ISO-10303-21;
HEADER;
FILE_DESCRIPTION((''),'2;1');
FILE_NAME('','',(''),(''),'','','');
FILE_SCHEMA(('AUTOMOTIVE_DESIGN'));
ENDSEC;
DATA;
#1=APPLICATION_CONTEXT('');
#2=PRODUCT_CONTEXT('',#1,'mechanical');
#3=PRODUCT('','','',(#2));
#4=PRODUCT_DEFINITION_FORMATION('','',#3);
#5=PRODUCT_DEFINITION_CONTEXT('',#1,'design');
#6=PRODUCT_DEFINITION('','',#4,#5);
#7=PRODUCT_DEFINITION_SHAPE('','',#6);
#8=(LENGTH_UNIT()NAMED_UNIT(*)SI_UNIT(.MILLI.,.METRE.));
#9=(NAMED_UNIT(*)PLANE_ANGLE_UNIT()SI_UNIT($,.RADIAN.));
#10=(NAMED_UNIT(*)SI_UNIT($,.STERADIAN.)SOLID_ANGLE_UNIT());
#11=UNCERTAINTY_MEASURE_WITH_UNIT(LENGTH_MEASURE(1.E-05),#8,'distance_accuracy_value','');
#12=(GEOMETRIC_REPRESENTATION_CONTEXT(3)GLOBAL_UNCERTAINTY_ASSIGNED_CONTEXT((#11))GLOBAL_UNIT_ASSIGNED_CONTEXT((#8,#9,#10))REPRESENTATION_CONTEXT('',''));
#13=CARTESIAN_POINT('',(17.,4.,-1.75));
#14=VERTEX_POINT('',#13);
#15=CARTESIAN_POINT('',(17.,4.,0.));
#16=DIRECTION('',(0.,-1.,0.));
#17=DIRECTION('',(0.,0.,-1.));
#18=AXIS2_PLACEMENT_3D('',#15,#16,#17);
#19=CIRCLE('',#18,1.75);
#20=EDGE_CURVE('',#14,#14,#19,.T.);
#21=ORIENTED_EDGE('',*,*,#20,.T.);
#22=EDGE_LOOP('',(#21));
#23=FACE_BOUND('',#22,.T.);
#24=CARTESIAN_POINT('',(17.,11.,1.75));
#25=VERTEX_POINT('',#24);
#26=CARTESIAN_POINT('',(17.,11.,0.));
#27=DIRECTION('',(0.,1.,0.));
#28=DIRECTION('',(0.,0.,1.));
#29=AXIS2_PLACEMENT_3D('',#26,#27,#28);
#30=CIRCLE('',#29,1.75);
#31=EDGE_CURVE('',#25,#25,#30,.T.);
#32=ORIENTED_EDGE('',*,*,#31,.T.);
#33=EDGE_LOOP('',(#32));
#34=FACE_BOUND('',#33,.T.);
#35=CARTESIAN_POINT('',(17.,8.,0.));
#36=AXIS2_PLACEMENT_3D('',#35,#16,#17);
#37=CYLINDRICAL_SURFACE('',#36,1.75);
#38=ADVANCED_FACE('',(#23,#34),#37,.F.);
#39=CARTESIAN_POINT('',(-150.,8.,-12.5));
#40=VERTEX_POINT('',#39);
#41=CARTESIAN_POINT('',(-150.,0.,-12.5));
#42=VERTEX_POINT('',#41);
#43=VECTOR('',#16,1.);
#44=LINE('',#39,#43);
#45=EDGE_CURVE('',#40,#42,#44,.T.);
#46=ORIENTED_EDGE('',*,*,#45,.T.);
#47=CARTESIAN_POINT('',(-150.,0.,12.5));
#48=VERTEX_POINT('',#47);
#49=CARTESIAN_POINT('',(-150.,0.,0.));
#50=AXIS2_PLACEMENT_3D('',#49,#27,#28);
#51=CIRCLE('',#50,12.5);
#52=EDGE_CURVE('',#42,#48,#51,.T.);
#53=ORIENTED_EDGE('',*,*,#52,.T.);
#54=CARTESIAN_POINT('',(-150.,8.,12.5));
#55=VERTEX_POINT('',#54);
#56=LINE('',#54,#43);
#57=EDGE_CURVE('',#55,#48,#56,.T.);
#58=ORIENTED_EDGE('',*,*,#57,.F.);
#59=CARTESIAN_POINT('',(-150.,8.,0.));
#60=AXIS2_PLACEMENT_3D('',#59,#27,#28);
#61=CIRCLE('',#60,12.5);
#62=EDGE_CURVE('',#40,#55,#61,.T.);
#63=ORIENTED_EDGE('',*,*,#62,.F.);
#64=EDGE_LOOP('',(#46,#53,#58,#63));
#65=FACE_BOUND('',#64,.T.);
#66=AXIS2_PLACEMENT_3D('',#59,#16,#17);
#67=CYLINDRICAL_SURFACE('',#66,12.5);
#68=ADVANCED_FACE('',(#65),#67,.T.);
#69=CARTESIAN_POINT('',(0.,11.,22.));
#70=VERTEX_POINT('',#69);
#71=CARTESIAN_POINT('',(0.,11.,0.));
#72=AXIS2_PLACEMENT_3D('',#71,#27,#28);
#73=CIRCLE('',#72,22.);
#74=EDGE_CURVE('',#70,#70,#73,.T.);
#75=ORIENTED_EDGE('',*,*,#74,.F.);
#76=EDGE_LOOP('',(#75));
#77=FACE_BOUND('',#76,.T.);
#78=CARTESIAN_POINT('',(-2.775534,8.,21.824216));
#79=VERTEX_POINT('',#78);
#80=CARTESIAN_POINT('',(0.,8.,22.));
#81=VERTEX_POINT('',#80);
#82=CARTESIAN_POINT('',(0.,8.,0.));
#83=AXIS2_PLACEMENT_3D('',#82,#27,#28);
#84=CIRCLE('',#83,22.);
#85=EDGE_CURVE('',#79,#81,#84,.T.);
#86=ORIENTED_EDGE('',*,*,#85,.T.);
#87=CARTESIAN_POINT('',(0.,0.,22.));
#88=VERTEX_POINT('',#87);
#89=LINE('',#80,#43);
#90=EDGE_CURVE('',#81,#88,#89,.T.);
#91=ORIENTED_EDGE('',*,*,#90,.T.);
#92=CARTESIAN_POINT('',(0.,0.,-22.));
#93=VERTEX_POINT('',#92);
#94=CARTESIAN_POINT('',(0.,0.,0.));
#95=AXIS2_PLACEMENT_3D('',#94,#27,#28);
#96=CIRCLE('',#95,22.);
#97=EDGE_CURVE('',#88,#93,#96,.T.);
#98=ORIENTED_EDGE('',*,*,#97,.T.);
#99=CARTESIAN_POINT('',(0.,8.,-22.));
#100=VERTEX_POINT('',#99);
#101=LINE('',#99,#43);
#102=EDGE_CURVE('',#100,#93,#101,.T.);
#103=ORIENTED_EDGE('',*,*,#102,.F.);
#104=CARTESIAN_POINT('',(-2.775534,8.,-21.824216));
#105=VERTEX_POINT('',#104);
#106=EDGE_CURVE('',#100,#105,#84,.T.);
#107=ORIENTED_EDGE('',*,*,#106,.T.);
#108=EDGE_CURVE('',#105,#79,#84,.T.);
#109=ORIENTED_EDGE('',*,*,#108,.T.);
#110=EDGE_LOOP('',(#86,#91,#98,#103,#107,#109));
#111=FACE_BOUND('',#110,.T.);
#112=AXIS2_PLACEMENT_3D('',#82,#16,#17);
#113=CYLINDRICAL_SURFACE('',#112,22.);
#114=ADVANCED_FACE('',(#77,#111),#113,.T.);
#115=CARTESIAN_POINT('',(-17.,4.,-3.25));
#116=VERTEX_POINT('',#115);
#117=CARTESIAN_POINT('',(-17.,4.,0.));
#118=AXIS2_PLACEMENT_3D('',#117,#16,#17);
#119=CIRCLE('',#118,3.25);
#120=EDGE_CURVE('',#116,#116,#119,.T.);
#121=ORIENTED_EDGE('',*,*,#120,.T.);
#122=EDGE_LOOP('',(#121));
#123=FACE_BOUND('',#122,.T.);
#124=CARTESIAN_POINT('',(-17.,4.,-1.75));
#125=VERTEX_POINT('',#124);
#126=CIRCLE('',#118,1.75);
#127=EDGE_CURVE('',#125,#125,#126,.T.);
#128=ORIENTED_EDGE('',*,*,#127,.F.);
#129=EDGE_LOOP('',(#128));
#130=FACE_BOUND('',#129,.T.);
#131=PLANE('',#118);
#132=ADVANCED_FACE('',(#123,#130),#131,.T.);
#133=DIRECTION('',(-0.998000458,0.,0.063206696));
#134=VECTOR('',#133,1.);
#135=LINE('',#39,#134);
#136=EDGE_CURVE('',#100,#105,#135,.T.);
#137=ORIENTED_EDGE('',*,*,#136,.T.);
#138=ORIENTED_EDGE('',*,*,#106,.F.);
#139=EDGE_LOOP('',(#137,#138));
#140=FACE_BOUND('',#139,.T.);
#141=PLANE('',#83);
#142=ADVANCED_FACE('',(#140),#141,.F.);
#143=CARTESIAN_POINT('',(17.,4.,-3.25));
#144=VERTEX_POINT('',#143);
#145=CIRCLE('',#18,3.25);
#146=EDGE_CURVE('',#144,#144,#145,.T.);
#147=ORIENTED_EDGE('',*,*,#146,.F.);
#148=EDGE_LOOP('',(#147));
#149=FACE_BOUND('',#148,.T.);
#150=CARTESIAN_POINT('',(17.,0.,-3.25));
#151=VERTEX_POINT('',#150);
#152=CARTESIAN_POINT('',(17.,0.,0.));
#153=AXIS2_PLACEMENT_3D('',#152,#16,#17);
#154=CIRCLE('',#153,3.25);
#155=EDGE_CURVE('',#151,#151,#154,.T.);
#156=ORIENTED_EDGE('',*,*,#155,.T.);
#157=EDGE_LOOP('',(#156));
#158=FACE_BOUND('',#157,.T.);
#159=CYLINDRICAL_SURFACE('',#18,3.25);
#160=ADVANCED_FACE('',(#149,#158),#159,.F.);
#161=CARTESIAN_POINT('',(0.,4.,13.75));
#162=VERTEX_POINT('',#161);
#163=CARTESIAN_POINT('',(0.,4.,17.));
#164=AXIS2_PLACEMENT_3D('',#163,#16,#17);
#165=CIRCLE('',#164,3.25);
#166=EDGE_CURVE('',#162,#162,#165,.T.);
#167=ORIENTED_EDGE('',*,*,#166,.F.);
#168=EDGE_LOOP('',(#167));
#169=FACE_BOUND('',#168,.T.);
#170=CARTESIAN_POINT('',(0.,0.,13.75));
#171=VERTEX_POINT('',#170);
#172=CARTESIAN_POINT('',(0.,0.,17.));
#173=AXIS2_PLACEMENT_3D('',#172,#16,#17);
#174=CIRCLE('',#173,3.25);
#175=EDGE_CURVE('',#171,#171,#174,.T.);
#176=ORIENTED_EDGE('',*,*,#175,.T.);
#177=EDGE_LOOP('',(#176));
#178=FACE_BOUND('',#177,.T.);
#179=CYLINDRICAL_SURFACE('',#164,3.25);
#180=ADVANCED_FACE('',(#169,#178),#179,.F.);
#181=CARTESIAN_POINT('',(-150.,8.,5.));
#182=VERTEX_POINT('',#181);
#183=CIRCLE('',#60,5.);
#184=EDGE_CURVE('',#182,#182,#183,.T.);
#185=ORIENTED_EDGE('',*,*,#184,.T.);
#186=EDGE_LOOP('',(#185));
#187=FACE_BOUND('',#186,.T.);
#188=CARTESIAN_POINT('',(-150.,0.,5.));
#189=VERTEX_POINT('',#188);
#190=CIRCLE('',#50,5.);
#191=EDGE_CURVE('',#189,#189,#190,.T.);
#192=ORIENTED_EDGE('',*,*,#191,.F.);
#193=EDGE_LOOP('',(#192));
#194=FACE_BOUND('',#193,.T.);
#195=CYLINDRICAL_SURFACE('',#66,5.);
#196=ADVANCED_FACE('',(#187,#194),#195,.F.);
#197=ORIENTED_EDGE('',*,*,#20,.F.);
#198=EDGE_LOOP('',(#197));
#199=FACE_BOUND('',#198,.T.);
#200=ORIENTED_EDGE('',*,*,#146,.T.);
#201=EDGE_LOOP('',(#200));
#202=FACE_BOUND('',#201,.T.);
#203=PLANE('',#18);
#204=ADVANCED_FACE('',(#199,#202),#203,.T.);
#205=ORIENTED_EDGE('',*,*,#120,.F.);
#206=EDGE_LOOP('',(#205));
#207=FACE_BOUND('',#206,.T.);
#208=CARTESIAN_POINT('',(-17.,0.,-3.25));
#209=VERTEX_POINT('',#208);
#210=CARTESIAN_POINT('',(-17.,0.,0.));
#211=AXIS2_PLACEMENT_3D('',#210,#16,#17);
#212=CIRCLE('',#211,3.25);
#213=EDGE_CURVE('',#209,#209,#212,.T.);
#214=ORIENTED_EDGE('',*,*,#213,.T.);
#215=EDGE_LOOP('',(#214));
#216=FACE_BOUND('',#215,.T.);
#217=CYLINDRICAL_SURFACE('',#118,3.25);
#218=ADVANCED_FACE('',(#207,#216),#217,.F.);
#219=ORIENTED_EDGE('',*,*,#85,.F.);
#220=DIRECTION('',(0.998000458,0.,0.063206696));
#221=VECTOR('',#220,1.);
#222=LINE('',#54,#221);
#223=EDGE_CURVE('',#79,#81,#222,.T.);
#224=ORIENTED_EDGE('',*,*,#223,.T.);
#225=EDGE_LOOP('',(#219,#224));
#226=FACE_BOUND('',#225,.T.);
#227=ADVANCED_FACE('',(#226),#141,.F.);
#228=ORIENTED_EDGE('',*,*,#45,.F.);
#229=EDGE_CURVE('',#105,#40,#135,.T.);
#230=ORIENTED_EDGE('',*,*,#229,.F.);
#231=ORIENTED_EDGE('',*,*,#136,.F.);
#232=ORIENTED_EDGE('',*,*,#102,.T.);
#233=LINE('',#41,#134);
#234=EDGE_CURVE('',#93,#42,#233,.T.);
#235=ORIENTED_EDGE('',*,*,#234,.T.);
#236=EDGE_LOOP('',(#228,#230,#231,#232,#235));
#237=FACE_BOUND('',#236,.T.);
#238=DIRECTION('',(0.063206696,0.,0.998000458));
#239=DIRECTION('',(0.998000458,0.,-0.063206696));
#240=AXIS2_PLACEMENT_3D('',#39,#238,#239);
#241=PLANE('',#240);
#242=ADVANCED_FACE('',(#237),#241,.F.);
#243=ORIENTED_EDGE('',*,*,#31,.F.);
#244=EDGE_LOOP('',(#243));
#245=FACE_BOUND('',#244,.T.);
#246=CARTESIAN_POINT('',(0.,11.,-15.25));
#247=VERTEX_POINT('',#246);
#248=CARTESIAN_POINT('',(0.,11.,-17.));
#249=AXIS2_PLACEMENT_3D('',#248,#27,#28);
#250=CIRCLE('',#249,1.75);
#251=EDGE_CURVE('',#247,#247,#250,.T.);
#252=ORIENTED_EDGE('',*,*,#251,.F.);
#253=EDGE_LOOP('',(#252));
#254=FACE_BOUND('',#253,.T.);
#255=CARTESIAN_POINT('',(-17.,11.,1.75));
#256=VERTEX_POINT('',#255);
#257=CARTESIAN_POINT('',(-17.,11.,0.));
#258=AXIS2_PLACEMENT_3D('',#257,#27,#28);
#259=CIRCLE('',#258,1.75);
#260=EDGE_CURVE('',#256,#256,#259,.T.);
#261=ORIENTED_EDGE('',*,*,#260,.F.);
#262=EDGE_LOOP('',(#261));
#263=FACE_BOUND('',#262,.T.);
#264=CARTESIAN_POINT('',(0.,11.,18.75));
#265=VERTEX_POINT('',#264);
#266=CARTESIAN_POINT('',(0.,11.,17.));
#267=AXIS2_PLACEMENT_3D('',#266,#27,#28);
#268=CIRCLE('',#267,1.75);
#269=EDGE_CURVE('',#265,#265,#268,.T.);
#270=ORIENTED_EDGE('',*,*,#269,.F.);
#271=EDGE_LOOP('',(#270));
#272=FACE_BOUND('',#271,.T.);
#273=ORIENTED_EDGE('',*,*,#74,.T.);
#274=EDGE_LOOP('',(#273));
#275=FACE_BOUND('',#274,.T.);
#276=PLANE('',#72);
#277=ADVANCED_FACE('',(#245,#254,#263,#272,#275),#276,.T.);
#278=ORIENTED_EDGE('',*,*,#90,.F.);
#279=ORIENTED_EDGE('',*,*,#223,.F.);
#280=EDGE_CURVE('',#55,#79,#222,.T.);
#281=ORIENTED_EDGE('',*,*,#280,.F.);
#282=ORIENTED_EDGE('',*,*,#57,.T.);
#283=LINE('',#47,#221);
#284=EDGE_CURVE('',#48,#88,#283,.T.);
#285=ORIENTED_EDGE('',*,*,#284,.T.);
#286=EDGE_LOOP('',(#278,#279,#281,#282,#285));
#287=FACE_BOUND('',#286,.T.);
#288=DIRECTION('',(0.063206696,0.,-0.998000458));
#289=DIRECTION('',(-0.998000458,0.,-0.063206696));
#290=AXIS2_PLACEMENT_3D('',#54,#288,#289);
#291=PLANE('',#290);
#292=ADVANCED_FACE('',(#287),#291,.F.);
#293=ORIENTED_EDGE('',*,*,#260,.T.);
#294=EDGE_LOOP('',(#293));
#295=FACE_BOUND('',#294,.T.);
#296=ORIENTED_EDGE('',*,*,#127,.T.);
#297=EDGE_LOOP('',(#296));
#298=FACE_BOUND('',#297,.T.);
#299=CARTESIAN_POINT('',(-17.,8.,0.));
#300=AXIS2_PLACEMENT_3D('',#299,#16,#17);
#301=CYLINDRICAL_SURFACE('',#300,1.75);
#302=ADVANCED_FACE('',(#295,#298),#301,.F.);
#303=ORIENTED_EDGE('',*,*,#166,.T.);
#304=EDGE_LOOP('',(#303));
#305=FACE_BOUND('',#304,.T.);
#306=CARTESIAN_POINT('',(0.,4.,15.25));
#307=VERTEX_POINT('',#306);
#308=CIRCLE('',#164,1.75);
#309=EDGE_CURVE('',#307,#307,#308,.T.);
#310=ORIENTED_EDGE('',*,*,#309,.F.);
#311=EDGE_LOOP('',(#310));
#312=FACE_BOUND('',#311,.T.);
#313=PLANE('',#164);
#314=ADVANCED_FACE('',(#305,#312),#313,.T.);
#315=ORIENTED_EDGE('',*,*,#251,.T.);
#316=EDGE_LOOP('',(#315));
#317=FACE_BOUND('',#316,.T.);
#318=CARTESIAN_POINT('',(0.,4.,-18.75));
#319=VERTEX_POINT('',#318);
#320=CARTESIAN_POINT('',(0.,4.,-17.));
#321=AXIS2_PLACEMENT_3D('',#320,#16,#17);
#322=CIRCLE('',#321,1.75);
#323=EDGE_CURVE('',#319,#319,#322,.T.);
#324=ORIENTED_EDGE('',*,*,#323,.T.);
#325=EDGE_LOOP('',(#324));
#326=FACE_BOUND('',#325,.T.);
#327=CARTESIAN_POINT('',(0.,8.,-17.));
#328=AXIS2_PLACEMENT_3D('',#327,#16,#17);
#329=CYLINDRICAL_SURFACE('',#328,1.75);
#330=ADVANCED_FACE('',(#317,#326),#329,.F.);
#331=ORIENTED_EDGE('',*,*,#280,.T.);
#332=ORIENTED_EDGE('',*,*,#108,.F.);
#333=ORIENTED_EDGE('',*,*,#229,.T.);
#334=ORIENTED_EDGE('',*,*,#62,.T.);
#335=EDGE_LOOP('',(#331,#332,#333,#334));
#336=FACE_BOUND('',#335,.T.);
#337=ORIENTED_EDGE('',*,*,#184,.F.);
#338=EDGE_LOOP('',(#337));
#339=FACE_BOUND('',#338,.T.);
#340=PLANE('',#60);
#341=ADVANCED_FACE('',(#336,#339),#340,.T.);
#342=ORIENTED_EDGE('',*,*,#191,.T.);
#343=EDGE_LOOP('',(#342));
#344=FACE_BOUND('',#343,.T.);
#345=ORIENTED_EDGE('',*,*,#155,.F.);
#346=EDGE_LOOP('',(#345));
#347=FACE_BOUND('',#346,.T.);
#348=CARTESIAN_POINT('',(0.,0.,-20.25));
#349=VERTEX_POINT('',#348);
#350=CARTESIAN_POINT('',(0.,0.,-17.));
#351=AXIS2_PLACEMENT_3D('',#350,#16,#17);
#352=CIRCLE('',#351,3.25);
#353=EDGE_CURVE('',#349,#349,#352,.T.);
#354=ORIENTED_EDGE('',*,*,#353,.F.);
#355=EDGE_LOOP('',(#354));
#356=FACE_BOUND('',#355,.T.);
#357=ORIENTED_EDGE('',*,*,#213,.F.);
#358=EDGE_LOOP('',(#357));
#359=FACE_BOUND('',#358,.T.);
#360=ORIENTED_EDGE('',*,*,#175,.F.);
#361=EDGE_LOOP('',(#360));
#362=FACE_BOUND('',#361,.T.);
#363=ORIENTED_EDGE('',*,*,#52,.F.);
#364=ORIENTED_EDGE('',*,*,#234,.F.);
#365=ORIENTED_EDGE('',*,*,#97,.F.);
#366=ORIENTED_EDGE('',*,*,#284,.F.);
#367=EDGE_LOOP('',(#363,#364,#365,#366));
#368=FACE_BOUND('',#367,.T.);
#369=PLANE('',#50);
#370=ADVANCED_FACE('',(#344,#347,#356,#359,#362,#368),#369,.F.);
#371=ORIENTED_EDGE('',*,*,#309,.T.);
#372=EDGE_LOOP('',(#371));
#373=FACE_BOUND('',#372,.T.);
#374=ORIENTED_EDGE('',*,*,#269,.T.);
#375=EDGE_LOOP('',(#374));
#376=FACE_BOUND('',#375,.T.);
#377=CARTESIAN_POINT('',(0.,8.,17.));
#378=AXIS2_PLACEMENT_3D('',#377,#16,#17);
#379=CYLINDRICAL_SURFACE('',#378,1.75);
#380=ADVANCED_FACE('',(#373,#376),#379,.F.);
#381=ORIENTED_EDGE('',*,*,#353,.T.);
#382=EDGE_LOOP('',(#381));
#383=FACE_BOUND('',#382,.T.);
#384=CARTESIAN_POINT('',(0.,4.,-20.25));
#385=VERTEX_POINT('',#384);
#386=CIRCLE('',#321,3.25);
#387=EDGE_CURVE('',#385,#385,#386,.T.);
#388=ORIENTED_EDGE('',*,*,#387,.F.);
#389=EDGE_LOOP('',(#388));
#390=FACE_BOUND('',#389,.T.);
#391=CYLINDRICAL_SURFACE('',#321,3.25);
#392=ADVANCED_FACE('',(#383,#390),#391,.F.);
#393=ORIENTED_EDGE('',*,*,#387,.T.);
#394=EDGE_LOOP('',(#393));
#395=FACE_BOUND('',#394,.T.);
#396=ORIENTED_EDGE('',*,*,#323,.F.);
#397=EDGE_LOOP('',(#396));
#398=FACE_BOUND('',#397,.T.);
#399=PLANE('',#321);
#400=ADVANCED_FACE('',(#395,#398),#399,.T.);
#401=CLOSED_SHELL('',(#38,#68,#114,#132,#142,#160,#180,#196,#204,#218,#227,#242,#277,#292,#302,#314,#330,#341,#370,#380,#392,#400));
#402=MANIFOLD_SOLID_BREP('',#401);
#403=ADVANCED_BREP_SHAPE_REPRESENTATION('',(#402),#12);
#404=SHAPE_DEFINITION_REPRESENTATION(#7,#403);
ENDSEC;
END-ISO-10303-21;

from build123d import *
from build123d.topology import SkipClean

# Parameters (mm, degrees)
SKETCH1_R           = 1.75
SKETCH1_R_2         = 5
BOSS_EXTRUDE1_DEPTH = 8
SKETCH2_R           = 22
SKETCH2_R_2         = 1.75
BOSS_EXTRUDE2_DEPTH = 3
SKETCH3_R           = 3.25
SKETCH3_R_2         = 1.75
CUT_EXTRUDE1_DEPTH  = 4


with BuildPart() as part:
    # Sketch1 → Boss-Extrude1 (new body)
    with BuildSketch(Plane(origin=(0, 0, 0), x_dir=(1, 0, 0), z_dir=(0, 1, 0))):
        with BuildLine():
            Line((-150, 12.5), (0, 22))
            ThreePointArc((0, 22), (22, 0), (0, -22))
            Line((0, -22), (-150, -12.5))
            ThreePointArc((-150, -12.5), (-162.5, 0), (-150, 12.5))
        make_face()
        with Locations((0, 17)):
            Circle(SKETCH1_R, mode=Mode.SUBTRACT)
        with Locations((17, 0)):
            Circle(SKETCH1_R, mode=Mode.SUBTRACT)
        with Locations((0, -17)):
            Circle(SKETCH1_R, mode=Mode.SUBTRACT)
        with Locations((-17, 0)):
            Circle(SKETCH1_R, mode=Mode.SUBTRACT)
        with Locations((-150, 0)):
            Circle(SKETCH1_R_2, mode=Mode.SUBTRACT)
    extrude(amount=BOSS_EXTRUDE1_DEPTH)

    # Sketch2 → Boss-Extrude2 (add)
    with SkipClean():  # the faces are left unmerged after this step: merging them gives an invalid solid
        with BuildSketch(Plane(origin=(0, 8, 0), x_dir=(1, 0, 0), z_dir=(0, 1, 0))):
            Circle(SKETCH2_R)
            with Locations((-17, 0)):
                Circle(SKETCH2_R_2, mode=Mode.SUBTRACT)
            with Locations((0, -17)):
                Circle(SKETCH2_R_2, mode=Mode.SUBTRACT)
            with Locations((17, 0)):
                Circle(SKETCH2_R_2, mode=Mode.SUBTRACT)
            with Locations((0, 17)):
                Circle(SKETCH2_R_2, mode=Mode.SUBTRACT)
        extrude(amount=BOSS_EXTRUDE2_DEPTH)
    add(part.part.scale(1), mode=Mode.REPLACE)  # the faces are merged on a copy

    # Sketch3 → Cut-Extrude1 (cut)
    # profile 1 of 4: a face of its own
    with BuildSketch(Plane(origin=(0, 0, 0), x_dir=(-1, 0, 0), z_dir=(0, -1, 0))):
        with Locations((0, 17)):
            Circle(SKETCH3_R)
        with Locations((0, 17)):
            Circle(SKETCH3_R_2, mode=Mode.SUBTRACT)
    # profile 2 of 4: a face of its own
    with BuildSketch(Plane(origin=(0, 0, 0), x_dir=(-1, 0, 0), z_dir=(0, -1, 0))):
        with Locations((-17, 0)):
            Circle(SKETCH3_R)
        with Locations((-17, 0)):
            Circle(SKETCH3_R_2, mode=Mode.SUBTRACT)
    # profile 3 of 4: a face of its own
    with BuildSketch(Plane(origin=(0, 0, 0), x_dir=(-1, 0, 0), z_dir=(0, -1, 0))):
        with Locations((0, -17)):
            Circle(SKETCH3_R)
        with Locations((0, -17)):
            Circle(SKETCH3_R_2, mode=Mode.SUBTRACT)
    # profile 4 of 4: a face of its own
    with BuildSketch(Plane(origin=(0, 0, 0), x_dir=(-1, 0, 0), z_dir=(0, -1, 0))):
        with Locations((17, 0)):
            Circle(SKETCH3_R)
        with Locations((17, 0)):
            Circle(SKETCH3_R_2, mode=Mode.SUBTRACT)
    extrude(amount=-CUT_EXTRUDE1_DEPTH, mode=Mode.SUBTRACT)


solid = part.part
